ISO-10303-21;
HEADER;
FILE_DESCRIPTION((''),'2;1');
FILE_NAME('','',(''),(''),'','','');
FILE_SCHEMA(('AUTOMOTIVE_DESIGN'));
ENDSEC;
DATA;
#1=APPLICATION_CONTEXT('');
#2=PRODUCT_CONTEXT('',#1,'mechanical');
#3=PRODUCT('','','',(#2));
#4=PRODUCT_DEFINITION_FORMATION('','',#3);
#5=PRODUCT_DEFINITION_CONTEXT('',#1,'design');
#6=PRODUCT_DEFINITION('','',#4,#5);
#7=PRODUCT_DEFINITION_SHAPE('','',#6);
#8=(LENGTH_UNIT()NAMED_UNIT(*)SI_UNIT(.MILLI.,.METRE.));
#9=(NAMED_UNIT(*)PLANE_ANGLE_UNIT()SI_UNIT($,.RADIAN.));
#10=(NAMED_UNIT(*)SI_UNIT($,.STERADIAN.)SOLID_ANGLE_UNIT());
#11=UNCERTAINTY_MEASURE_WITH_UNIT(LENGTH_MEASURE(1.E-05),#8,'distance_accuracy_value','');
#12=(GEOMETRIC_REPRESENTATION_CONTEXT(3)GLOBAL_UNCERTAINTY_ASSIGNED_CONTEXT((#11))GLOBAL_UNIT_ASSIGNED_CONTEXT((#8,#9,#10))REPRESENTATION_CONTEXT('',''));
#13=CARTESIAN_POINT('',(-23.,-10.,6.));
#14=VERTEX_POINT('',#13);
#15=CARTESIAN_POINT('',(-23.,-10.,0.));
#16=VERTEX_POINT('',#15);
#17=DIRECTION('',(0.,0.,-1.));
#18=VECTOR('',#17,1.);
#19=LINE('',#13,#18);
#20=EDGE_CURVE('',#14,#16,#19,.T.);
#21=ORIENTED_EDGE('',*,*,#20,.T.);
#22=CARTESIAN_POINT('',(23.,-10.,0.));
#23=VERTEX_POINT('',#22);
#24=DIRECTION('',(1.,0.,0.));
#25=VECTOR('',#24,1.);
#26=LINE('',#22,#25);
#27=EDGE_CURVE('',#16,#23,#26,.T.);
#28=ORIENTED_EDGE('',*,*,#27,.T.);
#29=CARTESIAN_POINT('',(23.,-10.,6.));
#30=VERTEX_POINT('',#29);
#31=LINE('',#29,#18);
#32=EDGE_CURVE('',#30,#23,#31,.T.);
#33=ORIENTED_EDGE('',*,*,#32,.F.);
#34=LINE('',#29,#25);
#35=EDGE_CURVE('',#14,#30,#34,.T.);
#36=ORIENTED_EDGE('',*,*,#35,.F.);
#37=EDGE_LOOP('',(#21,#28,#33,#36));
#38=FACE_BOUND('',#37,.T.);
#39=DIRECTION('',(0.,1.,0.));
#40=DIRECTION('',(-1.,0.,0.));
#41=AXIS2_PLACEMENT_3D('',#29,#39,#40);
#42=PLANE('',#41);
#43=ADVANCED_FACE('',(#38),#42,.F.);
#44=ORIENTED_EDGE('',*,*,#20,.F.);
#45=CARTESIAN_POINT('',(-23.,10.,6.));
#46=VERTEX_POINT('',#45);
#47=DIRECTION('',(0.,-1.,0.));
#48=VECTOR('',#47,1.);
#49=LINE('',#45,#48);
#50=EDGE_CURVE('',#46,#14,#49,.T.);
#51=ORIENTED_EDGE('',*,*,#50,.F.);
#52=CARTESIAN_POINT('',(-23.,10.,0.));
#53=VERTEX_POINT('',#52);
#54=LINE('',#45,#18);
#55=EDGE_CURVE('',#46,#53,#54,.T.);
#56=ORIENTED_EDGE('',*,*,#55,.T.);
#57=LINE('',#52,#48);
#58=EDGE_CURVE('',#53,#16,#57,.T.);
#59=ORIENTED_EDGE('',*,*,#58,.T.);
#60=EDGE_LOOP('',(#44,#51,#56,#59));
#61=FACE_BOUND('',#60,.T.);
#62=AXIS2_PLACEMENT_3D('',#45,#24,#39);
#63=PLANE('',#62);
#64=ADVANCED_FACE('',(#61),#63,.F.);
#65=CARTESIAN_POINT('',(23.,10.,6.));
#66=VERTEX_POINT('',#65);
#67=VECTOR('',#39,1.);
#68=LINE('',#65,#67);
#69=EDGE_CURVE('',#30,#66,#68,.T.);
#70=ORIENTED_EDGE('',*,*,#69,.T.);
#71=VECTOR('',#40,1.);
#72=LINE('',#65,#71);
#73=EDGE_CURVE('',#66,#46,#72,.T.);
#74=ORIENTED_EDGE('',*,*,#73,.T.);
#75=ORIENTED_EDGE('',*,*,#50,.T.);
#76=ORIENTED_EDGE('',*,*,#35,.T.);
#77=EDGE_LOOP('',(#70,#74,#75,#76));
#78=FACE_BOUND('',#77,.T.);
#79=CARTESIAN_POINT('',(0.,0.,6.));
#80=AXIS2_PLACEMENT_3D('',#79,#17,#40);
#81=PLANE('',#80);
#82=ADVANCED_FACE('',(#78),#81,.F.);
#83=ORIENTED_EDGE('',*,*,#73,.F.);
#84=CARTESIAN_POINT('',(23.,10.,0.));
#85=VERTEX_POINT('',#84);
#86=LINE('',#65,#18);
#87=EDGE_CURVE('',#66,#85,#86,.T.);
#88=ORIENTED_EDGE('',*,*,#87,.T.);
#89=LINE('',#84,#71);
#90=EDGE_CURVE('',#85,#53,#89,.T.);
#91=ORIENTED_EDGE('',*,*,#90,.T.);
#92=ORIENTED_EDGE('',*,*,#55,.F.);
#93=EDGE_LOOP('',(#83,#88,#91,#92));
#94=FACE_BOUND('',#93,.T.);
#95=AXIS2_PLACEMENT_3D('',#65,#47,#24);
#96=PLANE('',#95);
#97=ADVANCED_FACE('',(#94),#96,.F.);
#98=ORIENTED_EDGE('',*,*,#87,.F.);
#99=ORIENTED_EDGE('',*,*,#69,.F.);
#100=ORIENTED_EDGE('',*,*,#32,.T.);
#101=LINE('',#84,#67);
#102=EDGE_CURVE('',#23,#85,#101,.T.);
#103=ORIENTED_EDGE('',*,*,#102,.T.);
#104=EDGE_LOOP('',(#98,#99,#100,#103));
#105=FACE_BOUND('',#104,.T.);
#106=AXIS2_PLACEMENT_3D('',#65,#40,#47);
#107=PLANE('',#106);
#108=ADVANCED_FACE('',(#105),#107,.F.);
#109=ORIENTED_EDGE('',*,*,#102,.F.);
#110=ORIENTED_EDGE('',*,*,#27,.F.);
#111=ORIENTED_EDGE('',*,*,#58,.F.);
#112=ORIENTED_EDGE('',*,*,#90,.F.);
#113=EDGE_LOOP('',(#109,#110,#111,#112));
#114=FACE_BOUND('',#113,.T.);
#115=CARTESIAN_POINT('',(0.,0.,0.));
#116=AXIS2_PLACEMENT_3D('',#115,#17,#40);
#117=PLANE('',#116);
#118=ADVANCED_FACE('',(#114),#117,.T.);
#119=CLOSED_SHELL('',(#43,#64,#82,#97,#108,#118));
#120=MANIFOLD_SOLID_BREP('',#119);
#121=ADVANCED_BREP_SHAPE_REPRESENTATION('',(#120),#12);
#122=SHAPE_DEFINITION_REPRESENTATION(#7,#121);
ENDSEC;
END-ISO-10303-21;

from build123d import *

# Parameters (mm, degrees)
SKETCH2_W           = 46
SKETCH2_H           = 20
BOSS_EXTRUDE1_DEPTH = 6


with BuildPart() as part:
    # Sketch2 → Boss-Extrude1 (new body)
    with BuildSketch(Plane.XY):
        Rectangle(SKETCH2_W, SKETCH2_H)
    extrude(amount=BOSS_EXTRUDE1_DEPTH)


solid = part.part
